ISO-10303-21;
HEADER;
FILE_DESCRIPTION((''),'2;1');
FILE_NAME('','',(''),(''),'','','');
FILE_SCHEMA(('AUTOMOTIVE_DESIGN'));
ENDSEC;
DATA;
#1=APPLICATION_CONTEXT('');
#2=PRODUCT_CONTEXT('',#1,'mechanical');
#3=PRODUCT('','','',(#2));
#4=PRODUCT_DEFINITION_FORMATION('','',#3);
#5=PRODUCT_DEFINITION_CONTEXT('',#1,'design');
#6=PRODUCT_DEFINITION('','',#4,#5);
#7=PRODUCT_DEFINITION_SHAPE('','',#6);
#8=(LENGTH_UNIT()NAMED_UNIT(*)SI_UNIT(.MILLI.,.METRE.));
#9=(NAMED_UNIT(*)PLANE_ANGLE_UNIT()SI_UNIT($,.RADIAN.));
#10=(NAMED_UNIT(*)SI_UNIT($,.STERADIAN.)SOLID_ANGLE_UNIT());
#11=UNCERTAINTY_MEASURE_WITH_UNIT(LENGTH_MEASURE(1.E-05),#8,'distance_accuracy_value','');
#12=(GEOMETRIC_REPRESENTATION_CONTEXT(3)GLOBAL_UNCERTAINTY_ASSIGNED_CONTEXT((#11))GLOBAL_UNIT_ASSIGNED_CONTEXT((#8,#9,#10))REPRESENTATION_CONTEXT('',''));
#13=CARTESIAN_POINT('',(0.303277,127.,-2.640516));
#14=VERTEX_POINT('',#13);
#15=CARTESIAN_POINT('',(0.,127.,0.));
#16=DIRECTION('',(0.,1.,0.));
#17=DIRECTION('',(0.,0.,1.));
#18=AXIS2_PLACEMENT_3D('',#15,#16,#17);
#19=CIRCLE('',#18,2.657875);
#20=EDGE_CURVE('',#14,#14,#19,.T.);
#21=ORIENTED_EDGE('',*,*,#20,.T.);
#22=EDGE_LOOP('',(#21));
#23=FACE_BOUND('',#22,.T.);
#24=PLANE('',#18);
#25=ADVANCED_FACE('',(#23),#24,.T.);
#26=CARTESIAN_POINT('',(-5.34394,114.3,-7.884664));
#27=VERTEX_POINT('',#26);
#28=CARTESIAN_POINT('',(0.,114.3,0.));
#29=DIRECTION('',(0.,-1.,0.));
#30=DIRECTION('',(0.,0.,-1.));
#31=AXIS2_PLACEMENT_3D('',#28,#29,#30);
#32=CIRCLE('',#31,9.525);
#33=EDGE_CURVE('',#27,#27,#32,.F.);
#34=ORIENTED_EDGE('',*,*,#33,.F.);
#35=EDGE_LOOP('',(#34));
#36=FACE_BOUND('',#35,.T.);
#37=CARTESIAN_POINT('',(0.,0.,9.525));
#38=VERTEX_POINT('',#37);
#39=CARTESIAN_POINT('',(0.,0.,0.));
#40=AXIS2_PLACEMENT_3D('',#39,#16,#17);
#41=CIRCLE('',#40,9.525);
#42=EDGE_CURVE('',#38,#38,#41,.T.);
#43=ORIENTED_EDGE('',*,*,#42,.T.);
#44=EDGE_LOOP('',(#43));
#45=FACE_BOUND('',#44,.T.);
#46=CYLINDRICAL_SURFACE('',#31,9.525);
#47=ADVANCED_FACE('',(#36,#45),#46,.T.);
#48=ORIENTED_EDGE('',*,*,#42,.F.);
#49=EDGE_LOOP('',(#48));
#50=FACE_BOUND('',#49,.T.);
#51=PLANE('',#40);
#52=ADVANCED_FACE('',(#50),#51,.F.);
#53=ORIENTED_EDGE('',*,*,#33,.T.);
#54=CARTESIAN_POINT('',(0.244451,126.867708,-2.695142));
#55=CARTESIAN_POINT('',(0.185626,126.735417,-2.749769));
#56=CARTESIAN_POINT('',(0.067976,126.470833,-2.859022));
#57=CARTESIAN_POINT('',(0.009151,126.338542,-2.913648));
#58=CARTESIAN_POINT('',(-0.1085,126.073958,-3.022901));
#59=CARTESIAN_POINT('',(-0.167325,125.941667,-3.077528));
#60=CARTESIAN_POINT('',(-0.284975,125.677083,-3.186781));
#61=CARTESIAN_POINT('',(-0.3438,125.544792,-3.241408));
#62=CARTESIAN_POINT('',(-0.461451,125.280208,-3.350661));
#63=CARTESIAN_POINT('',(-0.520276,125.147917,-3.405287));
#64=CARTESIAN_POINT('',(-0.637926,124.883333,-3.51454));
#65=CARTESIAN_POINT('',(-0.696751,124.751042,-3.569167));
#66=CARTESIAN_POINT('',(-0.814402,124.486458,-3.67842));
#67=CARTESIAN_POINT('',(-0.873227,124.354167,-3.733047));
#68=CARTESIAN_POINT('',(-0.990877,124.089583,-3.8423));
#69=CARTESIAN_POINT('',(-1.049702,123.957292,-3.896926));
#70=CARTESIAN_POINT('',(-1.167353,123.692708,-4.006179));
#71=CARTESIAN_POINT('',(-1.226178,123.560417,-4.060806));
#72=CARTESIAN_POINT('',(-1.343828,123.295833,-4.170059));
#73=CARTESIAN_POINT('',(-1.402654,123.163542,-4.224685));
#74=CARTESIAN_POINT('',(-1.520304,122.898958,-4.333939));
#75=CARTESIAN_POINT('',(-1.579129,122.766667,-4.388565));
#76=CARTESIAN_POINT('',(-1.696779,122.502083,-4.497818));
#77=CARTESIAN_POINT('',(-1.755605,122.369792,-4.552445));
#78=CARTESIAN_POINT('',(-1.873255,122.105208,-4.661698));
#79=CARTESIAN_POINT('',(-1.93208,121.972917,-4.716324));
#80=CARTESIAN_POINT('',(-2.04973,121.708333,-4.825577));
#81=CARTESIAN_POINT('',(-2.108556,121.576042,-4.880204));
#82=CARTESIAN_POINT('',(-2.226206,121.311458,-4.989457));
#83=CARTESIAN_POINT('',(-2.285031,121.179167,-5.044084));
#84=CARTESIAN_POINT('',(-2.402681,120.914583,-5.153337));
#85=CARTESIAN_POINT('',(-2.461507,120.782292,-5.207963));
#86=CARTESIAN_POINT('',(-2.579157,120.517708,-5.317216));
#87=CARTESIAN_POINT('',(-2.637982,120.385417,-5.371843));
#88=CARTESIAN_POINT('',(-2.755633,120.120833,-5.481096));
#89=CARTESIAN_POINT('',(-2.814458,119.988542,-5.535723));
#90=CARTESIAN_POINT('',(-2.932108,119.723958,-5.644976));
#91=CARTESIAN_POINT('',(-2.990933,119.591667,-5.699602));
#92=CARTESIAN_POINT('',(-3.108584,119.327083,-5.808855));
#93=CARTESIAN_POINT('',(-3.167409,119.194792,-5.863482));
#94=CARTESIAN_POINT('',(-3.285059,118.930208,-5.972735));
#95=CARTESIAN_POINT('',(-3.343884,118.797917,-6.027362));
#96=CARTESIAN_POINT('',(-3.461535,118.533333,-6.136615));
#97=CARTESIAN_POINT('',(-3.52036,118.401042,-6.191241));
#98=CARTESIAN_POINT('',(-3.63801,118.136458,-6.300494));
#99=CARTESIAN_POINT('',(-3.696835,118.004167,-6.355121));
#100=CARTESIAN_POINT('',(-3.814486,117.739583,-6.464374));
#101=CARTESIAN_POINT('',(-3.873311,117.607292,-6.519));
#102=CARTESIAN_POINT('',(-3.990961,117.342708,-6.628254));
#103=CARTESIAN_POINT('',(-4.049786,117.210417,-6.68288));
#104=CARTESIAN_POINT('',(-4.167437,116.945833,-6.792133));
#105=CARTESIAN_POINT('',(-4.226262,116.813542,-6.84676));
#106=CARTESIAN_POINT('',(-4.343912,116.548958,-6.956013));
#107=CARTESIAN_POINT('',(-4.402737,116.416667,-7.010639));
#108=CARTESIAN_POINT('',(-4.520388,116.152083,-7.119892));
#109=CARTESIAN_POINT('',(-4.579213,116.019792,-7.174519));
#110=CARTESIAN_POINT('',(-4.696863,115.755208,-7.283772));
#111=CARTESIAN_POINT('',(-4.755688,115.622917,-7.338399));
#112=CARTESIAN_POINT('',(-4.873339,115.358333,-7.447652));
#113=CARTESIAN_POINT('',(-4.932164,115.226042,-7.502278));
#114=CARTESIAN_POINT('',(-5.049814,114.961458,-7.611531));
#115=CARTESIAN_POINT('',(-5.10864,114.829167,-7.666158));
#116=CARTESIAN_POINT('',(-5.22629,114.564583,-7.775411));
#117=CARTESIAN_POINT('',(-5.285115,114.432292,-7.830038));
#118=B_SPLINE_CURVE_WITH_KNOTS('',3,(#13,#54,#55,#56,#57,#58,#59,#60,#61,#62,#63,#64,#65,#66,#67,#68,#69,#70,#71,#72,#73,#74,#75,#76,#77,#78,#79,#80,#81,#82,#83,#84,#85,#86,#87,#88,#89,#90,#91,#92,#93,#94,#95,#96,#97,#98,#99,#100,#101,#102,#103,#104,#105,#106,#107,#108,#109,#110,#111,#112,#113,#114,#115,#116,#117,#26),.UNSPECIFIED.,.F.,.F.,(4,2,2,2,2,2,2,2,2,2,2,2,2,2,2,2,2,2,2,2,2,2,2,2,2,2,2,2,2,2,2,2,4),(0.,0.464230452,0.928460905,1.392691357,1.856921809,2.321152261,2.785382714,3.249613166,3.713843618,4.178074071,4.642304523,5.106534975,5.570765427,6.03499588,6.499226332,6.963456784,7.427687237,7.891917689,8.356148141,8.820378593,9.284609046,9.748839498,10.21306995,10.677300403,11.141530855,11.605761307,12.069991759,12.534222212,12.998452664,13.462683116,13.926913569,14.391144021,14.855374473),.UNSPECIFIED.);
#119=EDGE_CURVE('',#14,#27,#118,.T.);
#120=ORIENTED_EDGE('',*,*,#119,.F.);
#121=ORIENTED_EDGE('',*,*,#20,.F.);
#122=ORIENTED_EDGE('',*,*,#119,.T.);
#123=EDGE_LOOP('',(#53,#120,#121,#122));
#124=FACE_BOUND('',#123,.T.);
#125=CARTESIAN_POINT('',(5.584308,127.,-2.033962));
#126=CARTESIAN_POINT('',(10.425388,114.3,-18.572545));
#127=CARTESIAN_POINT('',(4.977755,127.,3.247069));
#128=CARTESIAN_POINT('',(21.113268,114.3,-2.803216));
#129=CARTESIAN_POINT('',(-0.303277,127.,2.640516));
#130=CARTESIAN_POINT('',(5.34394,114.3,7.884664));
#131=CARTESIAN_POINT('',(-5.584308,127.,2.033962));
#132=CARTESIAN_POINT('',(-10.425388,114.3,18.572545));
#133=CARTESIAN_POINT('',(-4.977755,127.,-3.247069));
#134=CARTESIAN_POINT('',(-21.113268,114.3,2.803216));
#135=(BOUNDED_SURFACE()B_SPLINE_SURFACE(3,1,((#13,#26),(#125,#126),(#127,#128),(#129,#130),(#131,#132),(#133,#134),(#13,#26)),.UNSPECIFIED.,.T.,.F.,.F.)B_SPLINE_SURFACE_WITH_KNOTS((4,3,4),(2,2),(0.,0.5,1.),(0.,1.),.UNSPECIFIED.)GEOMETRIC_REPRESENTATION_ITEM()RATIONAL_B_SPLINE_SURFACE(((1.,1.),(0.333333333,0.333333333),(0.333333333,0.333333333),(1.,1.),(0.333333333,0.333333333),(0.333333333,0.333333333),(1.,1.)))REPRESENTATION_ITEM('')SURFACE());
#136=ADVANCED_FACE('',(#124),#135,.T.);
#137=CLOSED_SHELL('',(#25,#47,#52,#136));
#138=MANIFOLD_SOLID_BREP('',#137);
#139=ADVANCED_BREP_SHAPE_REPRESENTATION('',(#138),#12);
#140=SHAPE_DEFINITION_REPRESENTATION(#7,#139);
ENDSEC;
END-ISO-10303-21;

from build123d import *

# Parameters (mm, degrees)
SKETCH2_R           = 9.525
BOSS_EXTRUDE1_DEPTH = 114.3


with BuildPart() as part:
    # Sketch2 → Boss-Extrude1 (new body)
    with BuildSketch(Plane(origin=(0, 0, 0), x_dir=(1, 0, 0), z_dir=(0, 1, 0))):
        with Locations(Location((0, 0, 0), (0, 0, 270))):
            Circle(SKETCH2_R)
    extrude(amount=BOSS_EXTRUDE1_DEPTH)

    # Loft1: read off the stored shape, not the designer's step
    # Loft1: loft between two sections, ruled curve by curve
    loft1_from = [
        Edge.make_bspline([(0.303276571, 127, -2.640515625), (5.584307822, 127, -2.033962484), (4.97775468, 127, 3.247068767), (-0.303276571, 127, 2.640515625), (-5.584307822, 127, 2.033962484), (-4.97775468, 127, -3.247068767), (0.303276571, 127, -2.640515625)], [0, 0, 0, 0, 0.5, 0.5, 0.5, 1, 1, 1, 1], 3, [1, 0.333333333, 0.333333333, 1, 0.333333333, 0.333333333, 1]),
    ]
    loft1_to = [
        Edge.make_bspline([(-5.343940235, 114.3, -7.884664087), (10.425387939, 114.3, -18.572544557), (21.113268409, 114.3, -2.803216383), (5.343940235, 114.3, 7.884664087), (-10.425387939, 114.3, 18.572544557), (-21.113268409, 114.3, 2.803216383), (-5.343940235, 114.3, -7.884664087)], [0, 0, 0, 0, 0.5, 0.5, 0.5, 1, 1, 1, 1], 3, [1, 0.333333333, 0.333333333, 1, 0.333333333, 0.333333333, 1]),
    ]
    loft1 = Solid(Shell([*[Face.make_surface_from_curves(loft1_from[k], loft1_to[k]) for k in range(1)], Face(Wire(loft1_from)), Face(Wire(loft1_to))]))
    add(loft1)


solid = part.part
